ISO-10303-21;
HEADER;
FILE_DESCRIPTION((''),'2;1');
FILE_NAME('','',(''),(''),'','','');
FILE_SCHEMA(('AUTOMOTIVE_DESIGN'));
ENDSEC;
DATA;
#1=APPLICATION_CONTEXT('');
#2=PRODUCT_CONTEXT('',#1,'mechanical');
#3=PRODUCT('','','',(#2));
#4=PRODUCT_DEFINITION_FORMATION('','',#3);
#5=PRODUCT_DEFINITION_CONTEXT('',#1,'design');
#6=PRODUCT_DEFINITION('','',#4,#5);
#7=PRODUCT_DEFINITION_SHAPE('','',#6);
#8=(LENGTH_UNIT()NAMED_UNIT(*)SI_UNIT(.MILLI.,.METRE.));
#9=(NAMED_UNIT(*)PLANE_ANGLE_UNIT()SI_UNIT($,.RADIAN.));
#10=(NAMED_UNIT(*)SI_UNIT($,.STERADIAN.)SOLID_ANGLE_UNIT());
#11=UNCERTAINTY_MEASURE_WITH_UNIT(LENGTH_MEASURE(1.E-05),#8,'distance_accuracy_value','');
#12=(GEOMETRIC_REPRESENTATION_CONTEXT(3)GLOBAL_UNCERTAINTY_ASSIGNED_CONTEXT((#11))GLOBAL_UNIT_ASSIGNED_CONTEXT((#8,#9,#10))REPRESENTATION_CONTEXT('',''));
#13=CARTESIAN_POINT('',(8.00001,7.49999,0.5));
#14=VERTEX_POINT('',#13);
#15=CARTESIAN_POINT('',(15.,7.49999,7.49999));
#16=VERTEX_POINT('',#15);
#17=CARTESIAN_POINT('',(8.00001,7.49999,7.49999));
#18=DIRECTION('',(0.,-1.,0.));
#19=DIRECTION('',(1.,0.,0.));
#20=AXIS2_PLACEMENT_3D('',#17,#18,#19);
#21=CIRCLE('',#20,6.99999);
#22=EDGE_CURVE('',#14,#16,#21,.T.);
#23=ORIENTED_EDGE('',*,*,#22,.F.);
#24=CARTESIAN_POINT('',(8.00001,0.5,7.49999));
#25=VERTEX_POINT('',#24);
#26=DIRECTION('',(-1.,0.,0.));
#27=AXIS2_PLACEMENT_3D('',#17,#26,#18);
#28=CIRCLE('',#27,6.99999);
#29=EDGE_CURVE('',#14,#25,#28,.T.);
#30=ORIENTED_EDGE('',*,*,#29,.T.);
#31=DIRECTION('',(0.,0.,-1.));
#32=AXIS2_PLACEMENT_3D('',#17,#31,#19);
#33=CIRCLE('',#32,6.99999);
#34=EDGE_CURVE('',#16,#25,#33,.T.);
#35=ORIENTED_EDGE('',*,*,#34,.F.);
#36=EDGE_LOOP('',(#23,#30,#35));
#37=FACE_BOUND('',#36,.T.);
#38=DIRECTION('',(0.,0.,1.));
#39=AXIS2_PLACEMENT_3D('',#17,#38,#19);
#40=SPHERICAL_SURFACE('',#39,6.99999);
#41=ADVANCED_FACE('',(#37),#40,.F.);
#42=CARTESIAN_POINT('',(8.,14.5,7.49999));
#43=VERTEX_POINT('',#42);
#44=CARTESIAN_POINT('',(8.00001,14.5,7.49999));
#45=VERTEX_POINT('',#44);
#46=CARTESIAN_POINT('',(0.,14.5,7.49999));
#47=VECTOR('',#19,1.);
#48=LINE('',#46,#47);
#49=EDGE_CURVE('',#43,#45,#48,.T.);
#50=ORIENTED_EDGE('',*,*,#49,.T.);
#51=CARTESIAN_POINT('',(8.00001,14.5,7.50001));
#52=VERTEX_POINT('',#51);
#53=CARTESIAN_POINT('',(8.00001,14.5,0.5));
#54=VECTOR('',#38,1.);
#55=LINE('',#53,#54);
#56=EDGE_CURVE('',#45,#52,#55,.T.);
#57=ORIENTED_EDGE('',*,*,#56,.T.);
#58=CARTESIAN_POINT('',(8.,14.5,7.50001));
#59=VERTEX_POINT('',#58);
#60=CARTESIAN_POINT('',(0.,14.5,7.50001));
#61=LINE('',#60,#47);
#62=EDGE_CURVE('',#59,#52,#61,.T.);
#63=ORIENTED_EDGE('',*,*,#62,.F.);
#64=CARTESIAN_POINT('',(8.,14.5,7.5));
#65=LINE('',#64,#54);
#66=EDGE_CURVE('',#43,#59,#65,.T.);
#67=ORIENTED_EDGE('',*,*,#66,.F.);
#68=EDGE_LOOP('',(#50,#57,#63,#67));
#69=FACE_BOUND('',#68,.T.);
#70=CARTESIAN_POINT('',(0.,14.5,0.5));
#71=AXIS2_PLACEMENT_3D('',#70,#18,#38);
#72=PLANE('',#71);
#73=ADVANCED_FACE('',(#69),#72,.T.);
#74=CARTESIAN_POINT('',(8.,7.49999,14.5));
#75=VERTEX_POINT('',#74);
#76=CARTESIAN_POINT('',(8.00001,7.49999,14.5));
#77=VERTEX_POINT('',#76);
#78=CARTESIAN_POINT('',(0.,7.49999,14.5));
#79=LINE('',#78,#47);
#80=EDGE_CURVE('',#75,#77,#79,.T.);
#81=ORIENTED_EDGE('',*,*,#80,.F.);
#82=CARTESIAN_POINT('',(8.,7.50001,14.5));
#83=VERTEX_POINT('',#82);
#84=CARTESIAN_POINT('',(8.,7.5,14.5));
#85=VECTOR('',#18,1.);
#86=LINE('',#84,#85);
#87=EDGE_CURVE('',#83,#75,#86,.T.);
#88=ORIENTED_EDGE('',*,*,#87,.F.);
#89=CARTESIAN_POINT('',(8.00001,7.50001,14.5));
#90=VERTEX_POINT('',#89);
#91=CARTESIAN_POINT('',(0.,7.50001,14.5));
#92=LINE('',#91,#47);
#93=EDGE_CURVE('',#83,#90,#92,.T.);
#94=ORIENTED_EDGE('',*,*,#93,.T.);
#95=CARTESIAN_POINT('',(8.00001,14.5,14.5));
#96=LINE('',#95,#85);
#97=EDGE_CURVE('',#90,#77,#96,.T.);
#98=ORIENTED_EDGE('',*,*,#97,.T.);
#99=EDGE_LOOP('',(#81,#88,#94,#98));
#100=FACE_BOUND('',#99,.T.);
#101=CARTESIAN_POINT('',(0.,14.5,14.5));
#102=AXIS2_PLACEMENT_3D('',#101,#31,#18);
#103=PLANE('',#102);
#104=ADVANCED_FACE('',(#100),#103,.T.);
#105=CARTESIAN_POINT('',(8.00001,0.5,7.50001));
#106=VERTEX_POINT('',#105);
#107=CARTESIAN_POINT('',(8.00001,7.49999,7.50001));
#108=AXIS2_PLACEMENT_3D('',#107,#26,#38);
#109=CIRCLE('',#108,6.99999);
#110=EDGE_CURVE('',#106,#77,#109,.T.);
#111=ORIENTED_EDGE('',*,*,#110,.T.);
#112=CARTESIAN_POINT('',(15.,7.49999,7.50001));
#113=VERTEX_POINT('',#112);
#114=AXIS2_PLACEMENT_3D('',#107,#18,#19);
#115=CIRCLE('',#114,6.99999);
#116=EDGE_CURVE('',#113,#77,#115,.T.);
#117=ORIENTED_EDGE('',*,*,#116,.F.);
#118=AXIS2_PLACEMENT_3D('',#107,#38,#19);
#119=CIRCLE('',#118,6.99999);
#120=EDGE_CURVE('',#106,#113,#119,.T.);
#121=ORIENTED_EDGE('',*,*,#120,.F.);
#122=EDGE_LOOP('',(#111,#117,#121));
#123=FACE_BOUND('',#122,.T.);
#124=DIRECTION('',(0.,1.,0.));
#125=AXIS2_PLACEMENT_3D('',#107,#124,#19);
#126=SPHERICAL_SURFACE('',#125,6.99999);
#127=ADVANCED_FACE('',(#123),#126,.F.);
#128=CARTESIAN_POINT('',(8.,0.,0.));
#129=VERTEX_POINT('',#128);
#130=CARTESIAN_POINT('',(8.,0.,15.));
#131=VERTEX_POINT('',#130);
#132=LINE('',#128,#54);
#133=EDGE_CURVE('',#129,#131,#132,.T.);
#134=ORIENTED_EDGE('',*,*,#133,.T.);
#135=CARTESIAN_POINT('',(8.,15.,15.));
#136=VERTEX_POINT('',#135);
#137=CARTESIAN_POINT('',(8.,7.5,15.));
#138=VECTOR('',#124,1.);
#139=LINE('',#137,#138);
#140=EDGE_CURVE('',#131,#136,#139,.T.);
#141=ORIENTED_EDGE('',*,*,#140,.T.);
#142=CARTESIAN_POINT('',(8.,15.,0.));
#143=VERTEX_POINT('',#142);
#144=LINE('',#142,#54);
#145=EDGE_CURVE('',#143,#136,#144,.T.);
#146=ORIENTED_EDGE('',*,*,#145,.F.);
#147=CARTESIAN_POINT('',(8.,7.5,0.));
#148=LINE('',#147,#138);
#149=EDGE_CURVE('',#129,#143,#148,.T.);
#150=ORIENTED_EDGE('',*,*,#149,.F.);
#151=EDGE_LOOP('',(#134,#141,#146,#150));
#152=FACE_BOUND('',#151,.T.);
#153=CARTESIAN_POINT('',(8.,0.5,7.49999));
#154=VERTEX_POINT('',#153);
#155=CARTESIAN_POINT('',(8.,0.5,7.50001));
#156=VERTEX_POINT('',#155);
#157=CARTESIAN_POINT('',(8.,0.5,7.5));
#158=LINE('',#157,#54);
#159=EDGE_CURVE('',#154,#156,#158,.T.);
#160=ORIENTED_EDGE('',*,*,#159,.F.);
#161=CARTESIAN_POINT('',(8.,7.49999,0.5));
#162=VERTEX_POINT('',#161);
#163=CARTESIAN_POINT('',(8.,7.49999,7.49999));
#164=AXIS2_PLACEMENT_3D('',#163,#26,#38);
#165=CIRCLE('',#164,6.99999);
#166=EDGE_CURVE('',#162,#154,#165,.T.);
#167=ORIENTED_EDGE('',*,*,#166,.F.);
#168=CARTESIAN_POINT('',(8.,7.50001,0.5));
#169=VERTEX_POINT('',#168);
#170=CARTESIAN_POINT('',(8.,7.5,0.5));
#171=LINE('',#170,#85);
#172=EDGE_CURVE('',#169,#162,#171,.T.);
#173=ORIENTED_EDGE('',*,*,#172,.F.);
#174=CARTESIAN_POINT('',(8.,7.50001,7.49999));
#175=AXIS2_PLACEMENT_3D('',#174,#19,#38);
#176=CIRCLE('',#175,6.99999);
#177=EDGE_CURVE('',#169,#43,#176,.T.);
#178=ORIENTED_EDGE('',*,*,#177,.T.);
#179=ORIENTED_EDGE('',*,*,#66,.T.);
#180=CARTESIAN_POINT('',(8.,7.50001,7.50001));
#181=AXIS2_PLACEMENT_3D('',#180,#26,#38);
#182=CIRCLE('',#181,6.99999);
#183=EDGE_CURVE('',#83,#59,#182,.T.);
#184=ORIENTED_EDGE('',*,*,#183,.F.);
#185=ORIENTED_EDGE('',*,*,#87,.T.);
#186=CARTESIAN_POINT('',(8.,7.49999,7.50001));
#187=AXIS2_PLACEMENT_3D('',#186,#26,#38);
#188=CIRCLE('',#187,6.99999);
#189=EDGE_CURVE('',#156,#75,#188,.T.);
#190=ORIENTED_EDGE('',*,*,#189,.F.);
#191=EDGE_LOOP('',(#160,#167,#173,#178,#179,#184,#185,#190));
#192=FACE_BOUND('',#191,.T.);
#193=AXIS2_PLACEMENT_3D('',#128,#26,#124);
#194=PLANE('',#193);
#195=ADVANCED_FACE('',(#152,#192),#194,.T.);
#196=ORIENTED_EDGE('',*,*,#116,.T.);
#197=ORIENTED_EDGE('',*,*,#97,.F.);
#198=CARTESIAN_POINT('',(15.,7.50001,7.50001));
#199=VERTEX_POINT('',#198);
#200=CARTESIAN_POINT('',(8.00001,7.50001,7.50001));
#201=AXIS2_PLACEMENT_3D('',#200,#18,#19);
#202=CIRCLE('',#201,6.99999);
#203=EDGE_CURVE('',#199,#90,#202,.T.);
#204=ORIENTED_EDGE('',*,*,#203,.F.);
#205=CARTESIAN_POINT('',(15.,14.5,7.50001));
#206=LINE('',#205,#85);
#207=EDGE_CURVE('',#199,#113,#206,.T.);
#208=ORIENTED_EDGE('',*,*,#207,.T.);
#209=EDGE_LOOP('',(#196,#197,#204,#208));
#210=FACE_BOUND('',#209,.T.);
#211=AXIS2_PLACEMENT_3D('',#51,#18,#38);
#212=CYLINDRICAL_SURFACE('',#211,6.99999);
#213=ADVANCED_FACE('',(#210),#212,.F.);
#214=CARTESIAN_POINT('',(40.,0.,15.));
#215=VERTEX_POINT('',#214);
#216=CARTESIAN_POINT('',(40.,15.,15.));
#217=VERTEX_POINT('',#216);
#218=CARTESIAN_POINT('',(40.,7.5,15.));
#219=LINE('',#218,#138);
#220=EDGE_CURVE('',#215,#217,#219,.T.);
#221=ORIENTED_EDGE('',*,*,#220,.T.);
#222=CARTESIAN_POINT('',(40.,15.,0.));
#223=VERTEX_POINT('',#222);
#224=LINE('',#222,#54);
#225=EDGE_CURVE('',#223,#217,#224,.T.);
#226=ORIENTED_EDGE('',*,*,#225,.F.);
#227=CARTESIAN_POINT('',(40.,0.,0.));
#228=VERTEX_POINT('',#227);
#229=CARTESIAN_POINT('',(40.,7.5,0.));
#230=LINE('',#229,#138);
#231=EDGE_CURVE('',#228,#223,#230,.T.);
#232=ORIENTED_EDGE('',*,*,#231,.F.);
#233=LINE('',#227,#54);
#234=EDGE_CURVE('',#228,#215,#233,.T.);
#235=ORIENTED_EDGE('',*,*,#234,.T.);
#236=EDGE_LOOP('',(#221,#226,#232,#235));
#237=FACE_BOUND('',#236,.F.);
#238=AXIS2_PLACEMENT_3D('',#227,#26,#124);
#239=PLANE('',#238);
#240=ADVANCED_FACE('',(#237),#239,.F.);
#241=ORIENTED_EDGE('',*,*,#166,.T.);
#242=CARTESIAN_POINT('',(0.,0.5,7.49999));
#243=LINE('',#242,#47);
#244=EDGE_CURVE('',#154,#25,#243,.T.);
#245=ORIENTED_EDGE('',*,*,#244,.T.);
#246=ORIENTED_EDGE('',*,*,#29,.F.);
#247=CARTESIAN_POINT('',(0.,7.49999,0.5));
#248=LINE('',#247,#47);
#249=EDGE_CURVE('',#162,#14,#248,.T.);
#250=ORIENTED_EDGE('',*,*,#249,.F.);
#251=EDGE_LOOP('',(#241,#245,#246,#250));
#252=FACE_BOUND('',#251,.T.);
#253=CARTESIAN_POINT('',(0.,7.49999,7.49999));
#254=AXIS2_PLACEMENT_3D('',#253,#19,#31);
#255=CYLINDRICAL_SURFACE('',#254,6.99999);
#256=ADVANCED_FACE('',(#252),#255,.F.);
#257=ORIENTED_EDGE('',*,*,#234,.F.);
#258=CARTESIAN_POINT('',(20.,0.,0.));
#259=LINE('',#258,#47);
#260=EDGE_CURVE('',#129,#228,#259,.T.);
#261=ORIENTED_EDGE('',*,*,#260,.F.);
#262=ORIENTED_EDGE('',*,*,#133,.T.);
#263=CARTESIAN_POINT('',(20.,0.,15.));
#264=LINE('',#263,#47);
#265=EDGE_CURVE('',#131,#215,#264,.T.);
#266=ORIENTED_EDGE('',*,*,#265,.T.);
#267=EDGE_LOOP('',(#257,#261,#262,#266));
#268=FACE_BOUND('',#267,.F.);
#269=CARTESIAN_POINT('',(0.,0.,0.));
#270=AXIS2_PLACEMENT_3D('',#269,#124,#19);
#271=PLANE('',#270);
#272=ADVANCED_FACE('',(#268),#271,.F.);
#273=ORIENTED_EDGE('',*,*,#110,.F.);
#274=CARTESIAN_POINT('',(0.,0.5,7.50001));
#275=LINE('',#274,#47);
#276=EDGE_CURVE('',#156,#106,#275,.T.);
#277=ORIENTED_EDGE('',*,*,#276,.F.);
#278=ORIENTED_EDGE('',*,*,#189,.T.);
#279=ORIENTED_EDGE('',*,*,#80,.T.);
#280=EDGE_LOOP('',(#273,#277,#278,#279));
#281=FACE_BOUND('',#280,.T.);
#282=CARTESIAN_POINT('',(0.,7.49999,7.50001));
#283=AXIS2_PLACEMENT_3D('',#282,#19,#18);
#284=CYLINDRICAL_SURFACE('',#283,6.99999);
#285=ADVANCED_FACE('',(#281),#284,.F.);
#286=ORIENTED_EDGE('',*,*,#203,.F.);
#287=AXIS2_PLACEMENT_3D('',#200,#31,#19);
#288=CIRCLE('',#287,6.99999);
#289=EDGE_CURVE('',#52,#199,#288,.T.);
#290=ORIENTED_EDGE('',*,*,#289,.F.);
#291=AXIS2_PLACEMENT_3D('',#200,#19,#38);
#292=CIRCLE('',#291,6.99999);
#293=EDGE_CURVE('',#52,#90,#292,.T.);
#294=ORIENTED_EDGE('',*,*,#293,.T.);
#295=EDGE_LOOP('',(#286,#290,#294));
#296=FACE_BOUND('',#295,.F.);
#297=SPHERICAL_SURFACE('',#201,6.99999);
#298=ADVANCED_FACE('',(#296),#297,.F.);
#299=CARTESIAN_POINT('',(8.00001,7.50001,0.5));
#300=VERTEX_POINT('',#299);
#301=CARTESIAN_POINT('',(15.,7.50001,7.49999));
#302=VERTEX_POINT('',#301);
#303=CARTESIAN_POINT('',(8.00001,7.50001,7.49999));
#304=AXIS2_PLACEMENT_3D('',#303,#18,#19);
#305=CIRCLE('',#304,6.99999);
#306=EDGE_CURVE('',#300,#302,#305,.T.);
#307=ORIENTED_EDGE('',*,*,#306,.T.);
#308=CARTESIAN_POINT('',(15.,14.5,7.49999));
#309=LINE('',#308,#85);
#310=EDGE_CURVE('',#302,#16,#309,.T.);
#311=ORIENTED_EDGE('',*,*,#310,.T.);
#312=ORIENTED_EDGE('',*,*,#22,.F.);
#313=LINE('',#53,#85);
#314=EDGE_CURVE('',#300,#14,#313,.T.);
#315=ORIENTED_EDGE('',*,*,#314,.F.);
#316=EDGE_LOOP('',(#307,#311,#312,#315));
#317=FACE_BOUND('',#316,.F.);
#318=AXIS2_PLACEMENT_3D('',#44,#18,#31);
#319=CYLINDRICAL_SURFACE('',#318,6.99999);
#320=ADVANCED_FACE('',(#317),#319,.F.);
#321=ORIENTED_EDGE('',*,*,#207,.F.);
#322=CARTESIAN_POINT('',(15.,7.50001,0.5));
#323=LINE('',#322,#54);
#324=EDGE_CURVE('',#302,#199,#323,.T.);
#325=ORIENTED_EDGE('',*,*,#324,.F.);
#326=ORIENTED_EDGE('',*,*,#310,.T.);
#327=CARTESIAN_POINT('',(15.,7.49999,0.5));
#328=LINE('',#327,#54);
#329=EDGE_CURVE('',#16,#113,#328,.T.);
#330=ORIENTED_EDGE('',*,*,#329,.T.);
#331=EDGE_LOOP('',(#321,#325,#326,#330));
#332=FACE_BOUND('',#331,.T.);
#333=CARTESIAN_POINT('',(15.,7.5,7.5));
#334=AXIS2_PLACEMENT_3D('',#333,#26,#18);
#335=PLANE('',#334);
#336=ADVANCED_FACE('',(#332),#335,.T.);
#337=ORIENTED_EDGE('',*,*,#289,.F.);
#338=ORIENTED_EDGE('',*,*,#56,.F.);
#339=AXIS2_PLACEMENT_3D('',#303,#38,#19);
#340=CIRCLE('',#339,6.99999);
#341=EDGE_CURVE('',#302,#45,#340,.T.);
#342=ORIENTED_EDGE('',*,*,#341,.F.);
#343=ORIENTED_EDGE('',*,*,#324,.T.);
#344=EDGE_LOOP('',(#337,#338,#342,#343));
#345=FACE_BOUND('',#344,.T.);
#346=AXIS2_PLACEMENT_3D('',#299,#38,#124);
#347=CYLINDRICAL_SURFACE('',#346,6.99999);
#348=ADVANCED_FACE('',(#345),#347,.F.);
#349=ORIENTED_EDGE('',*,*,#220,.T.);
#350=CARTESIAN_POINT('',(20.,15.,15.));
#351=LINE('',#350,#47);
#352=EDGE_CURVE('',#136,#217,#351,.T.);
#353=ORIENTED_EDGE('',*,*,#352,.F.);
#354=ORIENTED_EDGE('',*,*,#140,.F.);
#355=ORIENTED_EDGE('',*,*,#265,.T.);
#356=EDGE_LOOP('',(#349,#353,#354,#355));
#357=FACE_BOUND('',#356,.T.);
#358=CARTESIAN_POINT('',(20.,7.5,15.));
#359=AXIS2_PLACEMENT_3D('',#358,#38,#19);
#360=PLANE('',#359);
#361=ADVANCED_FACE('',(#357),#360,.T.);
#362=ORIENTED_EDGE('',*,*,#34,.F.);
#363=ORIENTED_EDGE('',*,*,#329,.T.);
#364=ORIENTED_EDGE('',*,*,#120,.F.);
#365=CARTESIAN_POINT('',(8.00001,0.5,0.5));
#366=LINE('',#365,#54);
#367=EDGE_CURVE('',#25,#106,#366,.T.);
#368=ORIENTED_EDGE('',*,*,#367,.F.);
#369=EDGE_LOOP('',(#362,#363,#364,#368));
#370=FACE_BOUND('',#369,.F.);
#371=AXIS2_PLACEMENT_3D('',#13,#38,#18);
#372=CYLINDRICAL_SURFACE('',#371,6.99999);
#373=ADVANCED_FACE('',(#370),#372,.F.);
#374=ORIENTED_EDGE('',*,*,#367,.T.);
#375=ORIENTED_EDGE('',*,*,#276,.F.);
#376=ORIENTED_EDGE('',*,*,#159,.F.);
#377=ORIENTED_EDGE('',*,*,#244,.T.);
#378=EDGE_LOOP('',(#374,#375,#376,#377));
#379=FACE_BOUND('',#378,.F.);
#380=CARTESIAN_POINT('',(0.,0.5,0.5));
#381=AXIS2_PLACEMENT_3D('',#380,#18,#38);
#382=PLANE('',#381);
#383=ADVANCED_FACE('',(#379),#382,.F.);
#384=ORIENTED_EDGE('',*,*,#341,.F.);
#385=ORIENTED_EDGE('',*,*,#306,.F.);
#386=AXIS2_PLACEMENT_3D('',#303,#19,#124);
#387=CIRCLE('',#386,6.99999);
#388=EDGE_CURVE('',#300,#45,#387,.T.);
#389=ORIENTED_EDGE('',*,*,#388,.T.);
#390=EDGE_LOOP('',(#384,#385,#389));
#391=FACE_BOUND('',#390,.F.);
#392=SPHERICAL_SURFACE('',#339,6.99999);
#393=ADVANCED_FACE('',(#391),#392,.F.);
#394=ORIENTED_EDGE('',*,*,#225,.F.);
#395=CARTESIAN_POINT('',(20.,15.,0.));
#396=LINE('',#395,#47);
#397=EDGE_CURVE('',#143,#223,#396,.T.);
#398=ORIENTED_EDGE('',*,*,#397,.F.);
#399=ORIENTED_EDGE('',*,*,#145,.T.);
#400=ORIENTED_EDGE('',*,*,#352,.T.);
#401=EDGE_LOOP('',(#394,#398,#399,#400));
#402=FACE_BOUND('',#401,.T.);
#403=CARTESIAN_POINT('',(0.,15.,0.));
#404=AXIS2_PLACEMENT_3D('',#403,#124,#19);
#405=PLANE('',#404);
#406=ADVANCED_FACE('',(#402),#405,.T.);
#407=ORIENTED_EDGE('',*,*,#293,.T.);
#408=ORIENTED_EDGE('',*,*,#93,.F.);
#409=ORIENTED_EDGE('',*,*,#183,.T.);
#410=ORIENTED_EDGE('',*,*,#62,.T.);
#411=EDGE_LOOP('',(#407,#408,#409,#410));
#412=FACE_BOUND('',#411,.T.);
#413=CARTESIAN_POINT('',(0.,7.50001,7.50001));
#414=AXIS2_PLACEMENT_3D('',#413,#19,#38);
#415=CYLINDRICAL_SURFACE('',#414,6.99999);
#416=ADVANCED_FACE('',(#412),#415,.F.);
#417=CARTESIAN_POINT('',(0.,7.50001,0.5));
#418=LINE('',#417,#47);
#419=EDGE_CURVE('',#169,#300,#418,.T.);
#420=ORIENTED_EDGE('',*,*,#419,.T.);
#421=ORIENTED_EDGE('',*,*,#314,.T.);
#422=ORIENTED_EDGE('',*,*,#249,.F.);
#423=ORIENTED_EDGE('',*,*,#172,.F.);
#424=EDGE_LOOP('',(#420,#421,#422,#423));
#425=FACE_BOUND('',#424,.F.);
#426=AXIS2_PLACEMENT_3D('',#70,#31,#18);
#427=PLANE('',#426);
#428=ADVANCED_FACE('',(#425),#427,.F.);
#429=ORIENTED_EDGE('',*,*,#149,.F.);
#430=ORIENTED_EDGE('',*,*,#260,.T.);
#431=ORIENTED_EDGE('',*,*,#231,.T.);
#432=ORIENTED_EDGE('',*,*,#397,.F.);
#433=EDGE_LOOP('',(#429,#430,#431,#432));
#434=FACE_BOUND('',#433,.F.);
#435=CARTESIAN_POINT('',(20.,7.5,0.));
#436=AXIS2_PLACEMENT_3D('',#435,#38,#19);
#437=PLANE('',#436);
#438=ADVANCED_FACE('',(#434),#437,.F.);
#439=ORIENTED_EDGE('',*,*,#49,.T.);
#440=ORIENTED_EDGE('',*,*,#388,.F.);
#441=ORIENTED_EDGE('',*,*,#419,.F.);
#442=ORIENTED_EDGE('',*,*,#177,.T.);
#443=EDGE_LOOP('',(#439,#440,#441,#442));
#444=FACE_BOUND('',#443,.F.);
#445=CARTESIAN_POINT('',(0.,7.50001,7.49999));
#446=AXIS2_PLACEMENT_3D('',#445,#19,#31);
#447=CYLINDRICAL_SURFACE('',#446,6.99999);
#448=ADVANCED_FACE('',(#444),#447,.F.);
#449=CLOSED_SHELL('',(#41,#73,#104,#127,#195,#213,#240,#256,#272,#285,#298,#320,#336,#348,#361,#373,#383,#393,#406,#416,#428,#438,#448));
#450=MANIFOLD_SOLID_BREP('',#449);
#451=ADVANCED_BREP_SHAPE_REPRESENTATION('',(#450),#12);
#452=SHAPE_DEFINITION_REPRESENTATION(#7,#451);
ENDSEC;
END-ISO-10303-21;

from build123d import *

# Parameters (mm, degrees)
F0_W     = 40
F0_H     = 15
F1_DEPTH = 15
F2_W     = 14
F2_H     = 14
F3_DEPTH = 15
F4_R     = 6.99999
F5_DEPTH = 8


# Not quite as in the source:
# - a fillet or chamfer is up to 0.001 mm smaller than in the source, because OpenCascade refuses the exact size


with BuildPart() as f1:
    # F0 (on Top) → F1 (new body)
    with BuildSketch(Plane.XY):
        with Locations((20, 7.5)):
            Rectangle(F0_W, F0_H)
    extrude(amount=F1_DEPTH)

    # F2 (on face) → F3 (cut)
    with BuildSketch(Plane(origin=(0, 0, 0), x_dir=(0, -1, 0), z_dir=(-1, 0, 0))):
        with Locations((-7.5, 7.5)):
            Rectangle(F2_W, F2_H)
    extrude(amount=-F3_DEPTH, mode=Mode.SUBTRACT)

    # F4 (radius 7 in the source; OpenCascade refuses exactly that, so slightly less here)
    f4_edges = [f1.edges().sort_by_distance(p)[0] for p in [
        (15, 7.5, 14.5),
        (15, 14.5, 7.5),
        (7.5, 14.5, 14.5),
        (15, 0.5, 7.5),
        (15, 7.5, 0.5),
        (7.5, 0.5, 14.5),
        (7.5, 0.5, 0.5),
        (7.5, 14.5, 0.5),
    ]]
    fillet(f4_edges, radius=F4_R)

    # F5 (cut): a face of the model
    f5_faces = [f1.faces().sort_by_distance(p)[0] for p in [
        (0, 0.2878679656, 7.5),
    ]]
    extrude(f5_faces, amount=-F5_DEPTH, mode=Mode.SUBTRACT)


solid = f1.part
